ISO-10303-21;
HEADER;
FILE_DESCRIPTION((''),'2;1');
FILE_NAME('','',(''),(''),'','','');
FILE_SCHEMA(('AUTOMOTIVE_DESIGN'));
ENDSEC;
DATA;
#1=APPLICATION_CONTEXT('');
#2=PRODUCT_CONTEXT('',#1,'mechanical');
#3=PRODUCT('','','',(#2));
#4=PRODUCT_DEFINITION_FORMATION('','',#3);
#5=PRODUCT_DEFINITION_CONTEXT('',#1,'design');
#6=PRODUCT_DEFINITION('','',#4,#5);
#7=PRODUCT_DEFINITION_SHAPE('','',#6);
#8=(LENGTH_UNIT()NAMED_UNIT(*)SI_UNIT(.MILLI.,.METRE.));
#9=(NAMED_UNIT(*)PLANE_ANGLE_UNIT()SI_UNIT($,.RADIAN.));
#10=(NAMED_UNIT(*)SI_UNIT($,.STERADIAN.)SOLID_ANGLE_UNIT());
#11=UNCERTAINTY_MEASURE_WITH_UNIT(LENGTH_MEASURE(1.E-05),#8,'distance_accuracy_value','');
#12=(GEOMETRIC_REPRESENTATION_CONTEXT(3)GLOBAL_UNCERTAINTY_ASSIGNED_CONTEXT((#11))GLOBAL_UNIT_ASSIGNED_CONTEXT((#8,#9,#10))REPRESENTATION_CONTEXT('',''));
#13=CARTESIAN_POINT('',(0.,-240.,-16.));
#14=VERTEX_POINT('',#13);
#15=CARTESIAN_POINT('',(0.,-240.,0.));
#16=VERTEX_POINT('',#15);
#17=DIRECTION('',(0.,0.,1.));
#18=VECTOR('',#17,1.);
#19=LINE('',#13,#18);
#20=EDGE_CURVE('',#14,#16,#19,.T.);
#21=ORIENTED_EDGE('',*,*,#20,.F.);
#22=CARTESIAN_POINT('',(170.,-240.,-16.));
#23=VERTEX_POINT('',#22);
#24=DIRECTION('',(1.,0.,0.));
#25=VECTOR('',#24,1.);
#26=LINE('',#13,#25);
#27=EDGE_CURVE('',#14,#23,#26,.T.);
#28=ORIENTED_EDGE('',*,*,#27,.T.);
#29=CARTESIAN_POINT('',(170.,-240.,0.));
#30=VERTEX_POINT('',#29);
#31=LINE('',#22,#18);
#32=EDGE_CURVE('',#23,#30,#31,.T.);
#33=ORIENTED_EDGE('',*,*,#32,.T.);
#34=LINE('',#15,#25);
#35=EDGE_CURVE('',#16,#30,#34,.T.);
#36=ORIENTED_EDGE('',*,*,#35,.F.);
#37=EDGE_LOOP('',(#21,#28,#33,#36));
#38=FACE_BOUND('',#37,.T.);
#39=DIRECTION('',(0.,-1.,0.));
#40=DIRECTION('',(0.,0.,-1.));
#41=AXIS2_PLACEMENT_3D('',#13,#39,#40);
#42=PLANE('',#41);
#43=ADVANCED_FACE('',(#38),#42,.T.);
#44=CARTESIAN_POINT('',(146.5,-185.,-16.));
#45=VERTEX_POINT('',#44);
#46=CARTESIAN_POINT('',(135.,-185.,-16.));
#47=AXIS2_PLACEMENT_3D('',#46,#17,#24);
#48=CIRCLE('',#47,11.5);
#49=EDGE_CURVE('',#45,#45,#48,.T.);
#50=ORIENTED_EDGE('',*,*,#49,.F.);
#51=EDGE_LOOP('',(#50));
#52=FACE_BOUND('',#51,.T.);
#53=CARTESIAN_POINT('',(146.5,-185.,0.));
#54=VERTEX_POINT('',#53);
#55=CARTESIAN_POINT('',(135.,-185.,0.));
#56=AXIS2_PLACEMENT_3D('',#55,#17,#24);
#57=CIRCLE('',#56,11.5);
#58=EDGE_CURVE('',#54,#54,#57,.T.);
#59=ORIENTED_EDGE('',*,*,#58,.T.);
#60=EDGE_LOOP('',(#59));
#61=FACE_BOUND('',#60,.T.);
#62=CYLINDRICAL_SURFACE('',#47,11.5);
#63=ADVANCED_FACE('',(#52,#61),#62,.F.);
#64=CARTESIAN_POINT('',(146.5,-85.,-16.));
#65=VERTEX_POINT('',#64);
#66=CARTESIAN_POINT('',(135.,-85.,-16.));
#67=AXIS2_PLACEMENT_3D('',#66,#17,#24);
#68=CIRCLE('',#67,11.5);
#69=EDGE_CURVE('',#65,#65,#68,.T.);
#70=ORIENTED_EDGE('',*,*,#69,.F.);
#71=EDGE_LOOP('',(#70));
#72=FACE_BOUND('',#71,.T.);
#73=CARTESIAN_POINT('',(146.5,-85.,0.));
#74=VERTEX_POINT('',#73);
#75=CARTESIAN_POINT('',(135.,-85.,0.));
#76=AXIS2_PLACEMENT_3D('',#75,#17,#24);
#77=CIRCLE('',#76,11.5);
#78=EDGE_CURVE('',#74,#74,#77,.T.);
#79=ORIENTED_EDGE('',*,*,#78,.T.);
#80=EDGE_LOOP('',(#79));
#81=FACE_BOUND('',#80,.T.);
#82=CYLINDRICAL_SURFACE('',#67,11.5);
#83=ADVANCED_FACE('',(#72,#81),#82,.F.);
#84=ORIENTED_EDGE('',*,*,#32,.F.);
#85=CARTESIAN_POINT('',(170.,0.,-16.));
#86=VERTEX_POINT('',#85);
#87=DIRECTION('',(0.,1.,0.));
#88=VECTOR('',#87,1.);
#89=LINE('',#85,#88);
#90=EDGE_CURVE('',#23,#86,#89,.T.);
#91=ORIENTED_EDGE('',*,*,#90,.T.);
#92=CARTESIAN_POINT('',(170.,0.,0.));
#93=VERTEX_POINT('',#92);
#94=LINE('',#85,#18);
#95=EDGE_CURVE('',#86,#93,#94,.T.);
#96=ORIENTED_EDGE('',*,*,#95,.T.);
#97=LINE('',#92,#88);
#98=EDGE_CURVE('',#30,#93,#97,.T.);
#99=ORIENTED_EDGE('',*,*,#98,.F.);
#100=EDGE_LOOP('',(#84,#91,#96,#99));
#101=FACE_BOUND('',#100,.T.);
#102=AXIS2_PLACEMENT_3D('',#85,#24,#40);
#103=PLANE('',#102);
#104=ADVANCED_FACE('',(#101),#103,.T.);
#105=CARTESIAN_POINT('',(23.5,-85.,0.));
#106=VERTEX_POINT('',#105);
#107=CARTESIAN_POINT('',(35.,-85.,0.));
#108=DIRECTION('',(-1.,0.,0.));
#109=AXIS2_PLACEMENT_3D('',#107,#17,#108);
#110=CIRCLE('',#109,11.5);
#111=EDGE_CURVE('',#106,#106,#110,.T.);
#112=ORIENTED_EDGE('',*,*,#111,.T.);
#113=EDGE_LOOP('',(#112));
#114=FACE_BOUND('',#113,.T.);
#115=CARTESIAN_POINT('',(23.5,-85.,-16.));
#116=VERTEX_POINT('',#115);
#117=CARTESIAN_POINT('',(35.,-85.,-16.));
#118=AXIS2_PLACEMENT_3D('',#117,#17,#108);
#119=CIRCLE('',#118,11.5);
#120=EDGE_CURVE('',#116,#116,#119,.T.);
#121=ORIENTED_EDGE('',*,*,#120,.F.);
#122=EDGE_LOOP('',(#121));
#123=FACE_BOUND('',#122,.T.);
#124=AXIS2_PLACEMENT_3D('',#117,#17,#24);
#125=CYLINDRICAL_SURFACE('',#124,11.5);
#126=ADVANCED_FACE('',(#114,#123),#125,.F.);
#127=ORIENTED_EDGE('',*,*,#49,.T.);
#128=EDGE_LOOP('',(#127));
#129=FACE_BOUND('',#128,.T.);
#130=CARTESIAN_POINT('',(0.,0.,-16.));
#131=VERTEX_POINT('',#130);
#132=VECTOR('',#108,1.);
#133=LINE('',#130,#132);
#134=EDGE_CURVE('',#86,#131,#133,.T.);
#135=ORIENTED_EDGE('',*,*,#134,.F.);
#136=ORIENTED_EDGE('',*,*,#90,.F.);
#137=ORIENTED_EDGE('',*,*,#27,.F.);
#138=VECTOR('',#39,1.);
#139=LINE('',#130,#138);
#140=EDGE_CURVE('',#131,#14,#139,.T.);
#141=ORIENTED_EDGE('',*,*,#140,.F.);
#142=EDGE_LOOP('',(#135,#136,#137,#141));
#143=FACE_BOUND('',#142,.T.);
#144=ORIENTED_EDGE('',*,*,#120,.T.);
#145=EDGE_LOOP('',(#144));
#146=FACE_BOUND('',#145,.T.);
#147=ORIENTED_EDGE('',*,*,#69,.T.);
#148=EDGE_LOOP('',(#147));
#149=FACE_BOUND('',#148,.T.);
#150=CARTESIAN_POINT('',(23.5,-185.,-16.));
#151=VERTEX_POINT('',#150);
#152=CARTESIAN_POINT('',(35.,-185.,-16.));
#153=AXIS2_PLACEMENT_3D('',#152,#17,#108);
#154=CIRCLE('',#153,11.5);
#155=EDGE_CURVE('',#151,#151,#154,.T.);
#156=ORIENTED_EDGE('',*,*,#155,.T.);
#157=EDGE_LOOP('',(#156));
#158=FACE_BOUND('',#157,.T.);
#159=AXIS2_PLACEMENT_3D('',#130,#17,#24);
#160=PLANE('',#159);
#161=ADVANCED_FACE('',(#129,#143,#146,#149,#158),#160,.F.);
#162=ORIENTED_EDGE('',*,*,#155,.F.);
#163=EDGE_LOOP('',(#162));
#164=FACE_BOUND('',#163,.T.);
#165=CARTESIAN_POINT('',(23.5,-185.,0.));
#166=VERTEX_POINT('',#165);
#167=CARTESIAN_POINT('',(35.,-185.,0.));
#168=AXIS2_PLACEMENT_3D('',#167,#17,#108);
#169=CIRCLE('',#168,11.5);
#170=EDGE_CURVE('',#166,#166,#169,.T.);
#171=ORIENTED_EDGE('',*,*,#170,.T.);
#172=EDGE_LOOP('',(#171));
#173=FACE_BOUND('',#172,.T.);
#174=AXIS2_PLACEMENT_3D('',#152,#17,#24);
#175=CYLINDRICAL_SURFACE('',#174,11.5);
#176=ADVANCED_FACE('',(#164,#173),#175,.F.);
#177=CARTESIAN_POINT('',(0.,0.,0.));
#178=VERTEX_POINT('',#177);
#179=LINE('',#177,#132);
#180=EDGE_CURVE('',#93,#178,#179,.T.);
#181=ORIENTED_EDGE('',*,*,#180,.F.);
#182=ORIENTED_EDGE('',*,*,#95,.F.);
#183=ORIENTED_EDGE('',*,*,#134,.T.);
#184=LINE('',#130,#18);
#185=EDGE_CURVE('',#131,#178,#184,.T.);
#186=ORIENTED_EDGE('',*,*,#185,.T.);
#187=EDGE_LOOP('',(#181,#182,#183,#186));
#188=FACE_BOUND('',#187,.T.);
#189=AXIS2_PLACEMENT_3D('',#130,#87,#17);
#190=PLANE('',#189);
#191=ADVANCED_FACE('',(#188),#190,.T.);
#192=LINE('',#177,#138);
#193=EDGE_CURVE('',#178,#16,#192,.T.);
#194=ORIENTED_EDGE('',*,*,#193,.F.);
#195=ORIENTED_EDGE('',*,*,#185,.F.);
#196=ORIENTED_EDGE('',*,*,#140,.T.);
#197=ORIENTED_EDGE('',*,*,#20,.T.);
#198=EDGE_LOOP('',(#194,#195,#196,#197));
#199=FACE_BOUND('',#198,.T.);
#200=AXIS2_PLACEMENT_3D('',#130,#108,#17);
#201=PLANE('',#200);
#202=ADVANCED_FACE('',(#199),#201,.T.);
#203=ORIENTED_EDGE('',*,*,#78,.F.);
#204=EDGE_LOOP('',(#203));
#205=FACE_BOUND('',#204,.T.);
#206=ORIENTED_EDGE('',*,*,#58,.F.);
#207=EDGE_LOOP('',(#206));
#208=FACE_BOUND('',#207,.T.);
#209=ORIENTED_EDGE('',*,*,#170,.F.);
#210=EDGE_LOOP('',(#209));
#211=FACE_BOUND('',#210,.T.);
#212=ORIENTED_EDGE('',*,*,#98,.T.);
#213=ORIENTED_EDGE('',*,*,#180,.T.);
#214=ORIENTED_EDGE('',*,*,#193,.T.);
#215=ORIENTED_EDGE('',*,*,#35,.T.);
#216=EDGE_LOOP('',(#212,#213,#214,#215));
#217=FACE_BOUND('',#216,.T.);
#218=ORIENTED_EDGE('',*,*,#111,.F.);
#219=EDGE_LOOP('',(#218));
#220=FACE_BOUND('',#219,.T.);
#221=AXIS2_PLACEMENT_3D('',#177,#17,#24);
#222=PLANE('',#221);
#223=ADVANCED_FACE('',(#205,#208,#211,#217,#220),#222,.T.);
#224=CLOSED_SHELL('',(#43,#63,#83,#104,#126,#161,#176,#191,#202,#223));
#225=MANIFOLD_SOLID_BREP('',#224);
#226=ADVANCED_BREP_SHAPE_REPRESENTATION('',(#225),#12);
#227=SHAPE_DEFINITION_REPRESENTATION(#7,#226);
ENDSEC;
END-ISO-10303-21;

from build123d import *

# Parameters (mm, degrees)
SKETCH_1_W             = 170
SKETCH_1_H             = 240
SKETCH_1_R             = 11.5
SM_BASE_FLANGE_1_DEPTH = 16


# Sheet-metal steps are written as plain solids
with BuildPart() as part:
    # Sketch 1 → Базовая кромка1 (new body)
    with BuildSketch(Plane.XY):
        with Locations((85, -120)):
            Rectangle(SKETCH_1_W, SKETCH_1_H)
        with Locations((135, -185)):
            Circle(SKETCH_1_R, mode=Mode.SUBTRACT)
        with Locations((135, -85)):
            Circle(SKETCH_1_R, mode=Mode.SUBTRACT)
        with Locations(Location((35, -85, 0), (0, 0, 180))):
            Circle(SKETCH_1_R, mode=Mode.SUBTRACT)
        with Locations(Location((35, -185, 0), (0, 0, 180))):
            Circle(SKETCH_1_R, mode=Mode.SUBTRACT)
    extrude(amount=-SM_BASE_FLANGE_1_DEPTH)


solid = part.part
